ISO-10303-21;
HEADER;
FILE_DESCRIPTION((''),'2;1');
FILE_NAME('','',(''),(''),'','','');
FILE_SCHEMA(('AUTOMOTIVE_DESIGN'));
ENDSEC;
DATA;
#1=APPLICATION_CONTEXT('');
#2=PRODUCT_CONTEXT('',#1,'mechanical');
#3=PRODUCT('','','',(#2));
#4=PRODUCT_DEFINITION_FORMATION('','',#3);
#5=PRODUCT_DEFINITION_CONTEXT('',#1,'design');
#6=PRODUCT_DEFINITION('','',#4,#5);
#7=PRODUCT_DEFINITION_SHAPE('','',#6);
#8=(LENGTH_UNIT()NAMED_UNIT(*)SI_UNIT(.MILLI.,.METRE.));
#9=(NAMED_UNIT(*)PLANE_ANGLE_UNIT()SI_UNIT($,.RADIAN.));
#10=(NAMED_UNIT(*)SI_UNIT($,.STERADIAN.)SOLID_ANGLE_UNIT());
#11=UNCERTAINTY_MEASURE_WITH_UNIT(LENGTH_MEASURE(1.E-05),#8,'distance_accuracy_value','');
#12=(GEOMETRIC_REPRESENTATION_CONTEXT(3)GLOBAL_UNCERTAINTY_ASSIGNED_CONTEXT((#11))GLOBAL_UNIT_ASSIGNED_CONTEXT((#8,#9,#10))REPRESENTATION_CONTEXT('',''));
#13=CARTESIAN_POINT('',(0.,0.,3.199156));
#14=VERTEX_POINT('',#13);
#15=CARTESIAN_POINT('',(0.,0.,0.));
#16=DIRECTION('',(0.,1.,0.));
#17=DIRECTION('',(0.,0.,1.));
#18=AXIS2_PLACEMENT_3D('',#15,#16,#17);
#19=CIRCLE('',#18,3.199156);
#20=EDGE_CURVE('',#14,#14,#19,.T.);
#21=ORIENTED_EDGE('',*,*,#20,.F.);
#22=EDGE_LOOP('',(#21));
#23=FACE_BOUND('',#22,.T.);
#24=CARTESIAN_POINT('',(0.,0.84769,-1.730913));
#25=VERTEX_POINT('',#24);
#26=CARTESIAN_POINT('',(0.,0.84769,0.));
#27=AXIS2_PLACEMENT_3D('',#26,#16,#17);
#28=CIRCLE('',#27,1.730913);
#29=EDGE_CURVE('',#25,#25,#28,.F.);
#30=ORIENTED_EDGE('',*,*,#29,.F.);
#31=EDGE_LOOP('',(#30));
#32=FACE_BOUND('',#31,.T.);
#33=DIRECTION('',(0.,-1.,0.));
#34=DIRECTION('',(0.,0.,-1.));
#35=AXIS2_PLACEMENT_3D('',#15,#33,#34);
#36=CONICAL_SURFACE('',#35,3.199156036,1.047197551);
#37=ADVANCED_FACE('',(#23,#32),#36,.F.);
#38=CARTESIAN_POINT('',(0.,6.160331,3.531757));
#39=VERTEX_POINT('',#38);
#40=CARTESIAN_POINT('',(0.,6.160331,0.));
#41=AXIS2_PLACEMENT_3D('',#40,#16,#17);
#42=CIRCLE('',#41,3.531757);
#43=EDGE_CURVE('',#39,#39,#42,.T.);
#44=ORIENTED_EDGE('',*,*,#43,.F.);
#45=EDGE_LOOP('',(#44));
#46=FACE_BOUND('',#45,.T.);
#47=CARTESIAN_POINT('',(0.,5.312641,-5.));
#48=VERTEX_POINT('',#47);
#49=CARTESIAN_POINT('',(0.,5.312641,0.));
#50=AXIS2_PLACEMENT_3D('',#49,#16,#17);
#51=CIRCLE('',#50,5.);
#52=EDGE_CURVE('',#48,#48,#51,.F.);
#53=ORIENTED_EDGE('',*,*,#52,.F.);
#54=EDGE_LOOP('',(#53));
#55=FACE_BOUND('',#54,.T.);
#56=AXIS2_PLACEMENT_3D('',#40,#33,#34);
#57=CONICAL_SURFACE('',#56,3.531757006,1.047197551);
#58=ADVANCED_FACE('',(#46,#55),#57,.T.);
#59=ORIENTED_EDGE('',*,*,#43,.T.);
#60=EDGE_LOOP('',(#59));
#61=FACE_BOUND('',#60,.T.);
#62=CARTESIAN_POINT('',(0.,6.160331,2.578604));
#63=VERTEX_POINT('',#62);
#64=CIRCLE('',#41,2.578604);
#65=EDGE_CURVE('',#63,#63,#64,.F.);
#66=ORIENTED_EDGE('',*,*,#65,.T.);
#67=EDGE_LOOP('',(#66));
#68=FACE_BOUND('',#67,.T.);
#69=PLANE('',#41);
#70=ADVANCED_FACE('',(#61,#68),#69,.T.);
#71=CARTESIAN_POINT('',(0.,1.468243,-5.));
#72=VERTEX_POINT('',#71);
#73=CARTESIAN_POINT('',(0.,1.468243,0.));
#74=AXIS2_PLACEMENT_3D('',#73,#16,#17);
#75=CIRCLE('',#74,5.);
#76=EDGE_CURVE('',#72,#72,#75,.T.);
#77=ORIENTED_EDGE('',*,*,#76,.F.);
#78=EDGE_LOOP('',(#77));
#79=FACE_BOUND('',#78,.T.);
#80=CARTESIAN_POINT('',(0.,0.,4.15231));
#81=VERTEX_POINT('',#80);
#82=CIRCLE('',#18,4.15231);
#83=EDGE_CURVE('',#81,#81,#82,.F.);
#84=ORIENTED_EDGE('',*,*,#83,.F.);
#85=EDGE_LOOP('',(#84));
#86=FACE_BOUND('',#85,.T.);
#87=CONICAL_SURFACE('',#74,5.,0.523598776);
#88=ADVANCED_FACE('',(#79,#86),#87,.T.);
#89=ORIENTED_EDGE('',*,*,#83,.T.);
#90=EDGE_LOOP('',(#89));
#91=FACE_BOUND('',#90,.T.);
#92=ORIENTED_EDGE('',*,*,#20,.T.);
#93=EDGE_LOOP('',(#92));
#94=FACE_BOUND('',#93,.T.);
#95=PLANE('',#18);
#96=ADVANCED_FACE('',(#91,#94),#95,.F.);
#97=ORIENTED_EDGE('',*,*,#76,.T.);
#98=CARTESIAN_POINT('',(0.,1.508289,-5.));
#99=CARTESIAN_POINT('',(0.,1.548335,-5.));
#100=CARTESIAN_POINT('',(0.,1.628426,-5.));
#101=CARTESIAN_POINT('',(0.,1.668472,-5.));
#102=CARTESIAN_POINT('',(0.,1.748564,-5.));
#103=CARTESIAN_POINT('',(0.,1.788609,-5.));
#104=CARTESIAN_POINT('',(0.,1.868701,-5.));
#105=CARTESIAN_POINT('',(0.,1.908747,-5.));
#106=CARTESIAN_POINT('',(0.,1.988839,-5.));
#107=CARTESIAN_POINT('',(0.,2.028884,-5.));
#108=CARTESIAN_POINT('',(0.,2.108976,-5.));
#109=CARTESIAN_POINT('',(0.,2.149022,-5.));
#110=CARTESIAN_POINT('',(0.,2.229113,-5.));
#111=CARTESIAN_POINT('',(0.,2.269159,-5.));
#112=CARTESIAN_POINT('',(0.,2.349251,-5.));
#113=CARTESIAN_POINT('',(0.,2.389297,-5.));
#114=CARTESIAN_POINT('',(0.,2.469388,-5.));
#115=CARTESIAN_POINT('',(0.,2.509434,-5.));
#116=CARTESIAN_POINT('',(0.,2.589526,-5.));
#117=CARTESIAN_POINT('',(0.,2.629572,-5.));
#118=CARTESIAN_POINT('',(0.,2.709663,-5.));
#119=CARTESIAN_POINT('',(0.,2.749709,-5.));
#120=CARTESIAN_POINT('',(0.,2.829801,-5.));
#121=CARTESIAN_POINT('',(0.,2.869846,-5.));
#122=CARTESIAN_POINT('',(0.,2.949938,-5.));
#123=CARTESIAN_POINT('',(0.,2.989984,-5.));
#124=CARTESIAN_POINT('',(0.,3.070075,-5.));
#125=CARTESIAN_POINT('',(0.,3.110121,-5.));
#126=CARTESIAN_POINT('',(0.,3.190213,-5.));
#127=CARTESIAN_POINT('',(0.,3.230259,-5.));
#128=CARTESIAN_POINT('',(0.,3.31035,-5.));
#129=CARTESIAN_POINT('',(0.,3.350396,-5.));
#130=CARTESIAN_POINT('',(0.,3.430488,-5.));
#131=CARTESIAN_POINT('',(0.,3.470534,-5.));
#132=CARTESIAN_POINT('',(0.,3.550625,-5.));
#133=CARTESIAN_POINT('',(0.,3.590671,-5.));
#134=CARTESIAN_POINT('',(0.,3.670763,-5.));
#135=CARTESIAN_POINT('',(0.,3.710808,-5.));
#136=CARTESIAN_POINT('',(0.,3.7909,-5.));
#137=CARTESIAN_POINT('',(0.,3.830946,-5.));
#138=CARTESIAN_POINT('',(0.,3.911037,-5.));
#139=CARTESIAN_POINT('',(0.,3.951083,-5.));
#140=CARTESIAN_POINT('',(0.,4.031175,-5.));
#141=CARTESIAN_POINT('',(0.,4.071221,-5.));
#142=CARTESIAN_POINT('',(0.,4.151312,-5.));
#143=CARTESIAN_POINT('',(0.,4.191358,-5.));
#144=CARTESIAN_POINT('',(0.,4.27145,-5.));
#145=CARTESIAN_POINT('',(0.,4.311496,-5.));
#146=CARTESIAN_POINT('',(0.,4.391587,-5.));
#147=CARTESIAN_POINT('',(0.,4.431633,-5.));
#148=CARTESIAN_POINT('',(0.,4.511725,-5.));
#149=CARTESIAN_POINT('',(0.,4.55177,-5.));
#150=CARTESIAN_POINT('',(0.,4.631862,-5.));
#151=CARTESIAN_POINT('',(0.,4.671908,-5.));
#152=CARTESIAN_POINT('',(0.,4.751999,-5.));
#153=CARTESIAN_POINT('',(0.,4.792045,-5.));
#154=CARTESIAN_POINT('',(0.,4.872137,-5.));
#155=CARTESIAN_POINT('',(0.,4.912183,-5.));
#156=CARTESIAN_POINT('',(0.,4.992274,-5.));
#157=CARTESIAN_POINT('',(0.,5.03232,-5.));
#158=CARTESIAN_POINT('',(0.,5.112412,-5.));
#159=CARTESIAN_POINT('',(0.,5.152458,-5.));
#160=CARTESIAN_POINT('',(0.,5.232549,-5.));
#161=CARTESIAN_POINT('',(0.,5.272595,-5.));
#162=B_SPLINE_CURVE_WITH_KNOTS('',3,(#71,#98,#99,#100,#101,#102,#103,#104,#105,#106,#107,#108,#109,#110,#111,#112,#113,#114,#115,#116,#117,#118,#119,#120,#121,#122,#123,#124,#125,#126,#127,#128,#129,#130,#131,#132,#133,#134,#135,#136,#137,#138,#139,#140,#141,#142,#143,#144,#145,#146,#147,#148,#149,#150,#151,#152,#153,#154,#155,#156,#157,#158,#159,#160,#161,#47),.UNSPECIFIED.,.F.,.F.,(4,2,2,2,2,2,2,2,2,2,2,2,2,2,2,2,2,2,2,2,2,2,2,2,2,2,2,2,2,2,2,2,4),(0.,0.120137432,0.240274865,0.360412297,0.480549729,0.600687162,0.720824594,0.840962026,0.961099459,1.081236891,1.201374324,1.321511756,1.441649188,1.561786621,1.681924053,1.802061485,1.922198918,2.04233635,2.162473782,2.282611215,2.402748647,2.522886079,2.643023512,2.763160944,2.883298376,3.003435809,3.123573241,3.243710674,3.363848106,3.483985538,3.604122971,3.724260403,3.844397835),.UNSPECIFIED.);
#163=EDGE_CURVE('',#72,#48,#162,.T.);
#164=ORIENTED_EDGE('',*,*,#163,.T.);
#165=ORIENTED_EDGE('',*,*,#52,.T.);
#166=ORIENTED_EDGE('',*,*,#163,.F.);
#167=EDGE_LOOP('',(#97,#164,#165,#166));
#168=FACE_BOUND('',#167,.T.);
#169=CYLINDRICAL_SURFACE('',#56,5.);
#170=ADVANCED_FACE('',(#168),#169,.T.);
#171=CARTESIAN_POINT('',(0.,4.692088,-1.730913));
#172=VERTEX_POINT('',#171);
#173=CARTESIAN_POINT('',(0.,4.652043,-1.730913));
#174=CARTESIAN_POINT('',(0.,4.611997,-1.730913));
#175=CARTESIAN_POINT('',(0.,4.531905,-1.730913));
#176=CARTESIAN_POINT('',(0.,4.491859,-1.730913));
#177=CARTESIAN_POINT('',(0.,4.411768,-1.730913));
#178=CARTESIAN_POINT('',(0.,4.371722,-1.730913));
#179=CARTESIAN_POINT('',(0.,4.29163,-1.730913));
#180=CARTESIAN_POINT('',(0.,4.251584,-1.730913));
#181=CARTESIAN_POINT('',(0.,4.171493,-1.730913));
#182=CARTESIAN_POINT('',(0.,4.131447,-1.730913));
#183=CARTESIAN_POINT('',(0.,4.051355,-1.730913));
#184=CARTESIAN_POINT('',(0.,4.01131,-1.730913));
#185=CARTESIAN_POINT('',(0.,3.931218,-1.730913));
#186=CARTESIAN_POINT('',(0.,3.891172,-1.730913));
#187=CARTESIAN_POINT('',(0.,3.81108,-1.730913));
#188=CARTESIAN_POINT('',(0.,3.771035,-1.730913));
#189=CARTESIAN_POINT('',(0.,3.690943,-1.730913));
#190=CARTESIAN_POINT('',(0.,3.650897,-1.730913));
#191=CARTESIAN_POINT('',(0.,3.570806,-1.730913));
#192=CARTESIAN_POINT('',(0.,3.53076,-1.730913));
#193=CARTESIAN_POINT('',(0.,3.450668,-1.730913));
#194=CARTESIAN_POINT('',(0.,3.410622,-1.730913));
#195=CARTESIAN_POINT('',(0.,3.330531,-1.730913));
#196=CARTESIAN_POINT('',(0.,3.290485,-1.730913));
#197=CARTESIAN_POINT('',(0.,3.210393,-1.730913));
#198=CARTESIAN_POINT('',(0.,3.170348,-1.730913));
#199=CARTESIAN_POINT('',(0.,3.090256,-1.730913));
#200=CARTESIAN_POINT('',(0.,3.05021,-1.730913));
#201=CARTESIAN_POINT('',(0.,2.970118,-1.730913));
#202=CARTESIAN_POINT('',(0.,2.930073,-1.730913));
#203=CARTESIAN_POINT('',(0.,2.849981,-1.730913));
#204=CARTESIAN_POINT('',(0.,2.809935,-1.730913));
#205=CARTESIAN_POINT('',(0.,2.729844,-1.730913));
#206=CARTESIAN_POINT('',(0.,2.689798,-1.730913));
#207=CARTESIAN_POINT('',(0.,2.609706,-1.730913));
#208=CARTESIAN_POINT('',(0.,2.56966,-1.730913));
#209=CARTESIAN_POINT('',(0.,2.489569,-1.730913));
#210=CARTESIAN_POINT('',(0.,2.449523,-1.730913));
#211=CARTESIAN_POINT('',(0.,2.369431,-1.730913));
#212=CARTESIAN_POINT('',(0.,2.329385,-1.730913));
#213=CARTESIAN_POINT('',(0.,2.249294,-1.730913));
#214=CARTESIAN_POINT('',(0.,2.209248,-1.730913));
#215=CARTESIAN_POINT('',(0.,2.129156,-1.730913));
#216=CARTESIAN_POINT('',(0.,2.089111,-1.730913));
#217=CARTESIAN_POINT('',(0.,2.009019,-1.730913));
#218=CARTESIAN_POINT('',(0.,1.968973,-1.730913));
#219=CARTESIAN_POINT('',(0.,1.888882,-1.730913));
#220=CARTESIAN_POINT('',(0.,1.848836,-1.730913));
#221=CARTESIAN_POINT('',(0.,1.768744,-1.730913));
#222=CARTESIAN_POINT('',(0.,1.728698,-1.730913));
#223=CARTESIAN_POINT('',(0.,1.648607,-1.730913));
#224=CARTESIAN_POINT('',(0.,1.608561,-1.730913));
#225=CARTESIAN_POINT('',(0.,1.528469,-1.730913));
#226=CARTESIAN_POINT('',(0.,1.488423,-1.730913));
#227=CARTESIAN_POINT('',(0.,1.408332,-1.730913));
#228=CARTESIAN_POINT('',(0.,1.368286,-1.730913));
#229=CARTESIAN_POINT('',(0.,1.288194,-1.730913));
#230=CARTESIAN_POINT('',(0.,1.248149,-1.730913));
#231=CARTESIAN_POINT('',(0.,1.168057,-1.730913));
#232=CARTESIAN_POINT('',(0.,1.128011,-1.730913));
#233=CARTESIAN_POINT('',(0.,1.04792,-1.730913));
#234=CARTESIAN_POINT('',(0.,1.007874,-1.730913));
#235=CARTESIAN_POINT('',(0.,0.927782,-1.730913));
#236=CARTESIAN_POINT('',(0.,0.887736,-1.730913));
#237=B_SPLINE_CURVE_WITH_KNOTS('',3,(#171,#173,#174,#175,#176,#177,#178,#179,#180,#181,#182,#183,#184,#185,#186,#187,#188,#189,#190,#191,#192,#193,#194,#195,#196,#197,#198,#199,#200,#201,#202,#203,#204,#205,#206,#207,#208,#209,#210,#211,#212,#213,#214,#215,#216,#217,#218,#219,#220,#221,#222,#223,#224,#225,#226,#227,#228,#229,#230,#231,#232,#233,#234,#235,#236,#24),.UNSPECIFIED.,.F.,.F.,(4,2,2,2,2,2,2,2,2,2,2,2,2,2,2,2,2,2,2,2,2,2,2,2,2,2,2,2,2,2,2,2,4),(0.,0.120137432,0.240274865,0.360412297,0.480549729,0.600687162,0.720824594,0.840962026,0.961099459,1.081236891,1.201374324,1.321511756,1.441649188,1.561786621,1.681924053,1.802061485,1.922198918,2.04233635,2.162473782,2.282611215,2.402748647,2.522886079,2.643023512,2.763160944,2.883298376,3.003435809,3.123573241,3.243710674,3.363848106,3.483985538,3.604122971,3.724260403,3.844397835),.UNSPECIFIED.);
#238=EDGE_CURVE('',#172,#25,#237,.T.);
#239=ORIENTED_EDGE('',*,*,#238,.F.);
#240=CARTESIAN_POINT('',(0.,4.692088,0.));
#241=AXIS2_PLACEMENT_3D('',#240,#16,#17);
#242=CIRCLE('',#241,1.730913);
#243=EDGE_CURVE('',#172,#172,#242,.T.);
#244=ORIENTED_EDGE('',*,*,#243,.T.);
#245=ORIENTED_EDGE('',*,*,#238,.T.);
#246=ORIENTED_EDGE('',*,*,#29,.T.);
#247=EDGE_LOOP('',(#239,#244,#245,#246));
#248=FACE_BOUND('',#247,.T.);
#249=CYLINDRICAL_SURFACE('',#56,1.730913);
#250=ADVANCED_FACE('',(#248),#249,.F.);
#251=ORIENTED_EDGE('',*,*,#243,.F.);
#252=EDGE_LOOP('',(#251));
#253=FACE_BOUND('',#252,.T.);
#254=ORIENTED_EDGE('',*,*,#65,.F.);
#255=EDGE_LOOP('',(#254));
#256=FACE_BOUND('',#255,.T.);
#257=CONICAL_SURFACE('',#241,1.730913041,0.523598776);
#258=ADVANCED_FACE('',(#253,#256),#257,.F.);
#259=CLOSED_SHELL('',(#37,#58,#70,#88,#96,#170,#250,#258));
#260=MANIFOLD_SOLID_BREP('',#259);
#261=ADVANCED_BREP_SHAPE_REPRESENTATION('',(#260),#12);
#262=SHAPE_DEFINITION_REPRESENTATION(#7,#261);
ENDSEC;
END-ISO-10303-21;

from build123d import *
from OCP.BRepFilletAPI import BRepFilletAPI_MakeChamfer

# Parameters (mm, degrees)
SKETCH1_R           = 5
BOSS_EXTRUDE1_DEPTH = 6.160331318
SKETCH2_R           = 1.730913041
CUT_EXTRUDE1_DEPTH  = 10.378149175
CHAMFER1_SIZE       = 0.847690488
CHAMFER1_SIZE2      = 1.468242994


with BuildPart() as part:
    # Sketch1 → Boss-Extrude1 (new body)
    with BuildSketch(Plane(origin=(0, 0, 0), x_dir=(1, 0, 0), z_dir=(0, 1, 0))):
        Circle(SKETCH1_R)
    extrude(amount=BOSS_EXTRUDE1_DEPTH)

    # Sketch2 → Cut-Extrude1 (cut, through all)
    with BuildSketch(Plane(origin=(0, 0, 0), x_dir=(1, 0, 0), z_dir=(0, 1, 0))):
        Circle(SKETCH2_R)
    extrude(amount=CUT_EXTRUDE1_DEPTH, mode=Mode.SUBTRACT)

    # Chamfer1: one chamfer whose edges measure the first distance from different faces: ONE call of the kernel's chamfer builder (chamfer() names one face for all edges)
    chamfer1_edges_1 = [part.edges().sort_by_distance(p)[0] for p in [
        (-1.730913041, 6.160331318, 0),
    ]]
    chamfer1_side_1 = [part.faces().sort_by_distance(p)[0] for p in [
        (-4.858578644, 6.160331318, 0),
    ]]
    chamfer1_edges_2 = [part.edges().sort_by_distance(p)[0] for p in [
        (-1.730913041, 0, 0),
    ]]
    chamfer1_side_2 = [part.faces().sort_by_distance(p)[0] for p in [
        (-1.730913041, 3.080165659, 0),
    ]]
    chamfer1_edges_3 = [part.edges().sort_by_distance(p)[0] for p in [
        (-5, 0, 0),
    ]]
    chamfer1_side_3 = [part.faces().sort_by_distance(p)[0] for p in [
        (-4.858578644, 0, 0),
    ]]
    chamfer1_edges_4 = [part.edges().sort_by_distance(p)[0] for p in [
        (-5, 6.160331318, 0),
    ]]
    chamfer1_side_4 = [part.faces().sort_by_distance(p)[0] for p in [
        (-5, 3.080165659, 0),
    ]]
    chamfer1 = BRepFilletAPI_MakeChamfer(part.part.solid().wrapped)
    for e in chamfer1_edges_1:
        chamfer1.Add(CHAMFER1_SIZE, CHAMFER1_SIZE2, e.wrapped, chamfer1_side_1[0].wrapped)  # the first distance lies on this face
    for e in chamfer1_edges_2:
        chamfer1.Add(CHAMFER1_SIZE, CHAMFER1_SIZE2, e.wrapped, chamfer1_side_2[0].wrapped)  # the first distance lies on this face
    for e in chamfer1_edges_3:
        chamfer1.Add(CHAMFER1_SIZE, CHAMFER1_SIZE2, e.wrapped, chamfer1_side_3[0].wrapped)  # the first distance lies on this face
    for e in chamfer1_edges_4:
        chamfer1.Add(CHAMFER1_SIZE, CHAMFER1_SIZE2, e.wrapped, chamfer1_side_4[0].wrapped)  # the first distance lies on this face
    add(Compound.cast(chamfer1.Shape()), mode=Mode.REPLACE)


solid = part.part
